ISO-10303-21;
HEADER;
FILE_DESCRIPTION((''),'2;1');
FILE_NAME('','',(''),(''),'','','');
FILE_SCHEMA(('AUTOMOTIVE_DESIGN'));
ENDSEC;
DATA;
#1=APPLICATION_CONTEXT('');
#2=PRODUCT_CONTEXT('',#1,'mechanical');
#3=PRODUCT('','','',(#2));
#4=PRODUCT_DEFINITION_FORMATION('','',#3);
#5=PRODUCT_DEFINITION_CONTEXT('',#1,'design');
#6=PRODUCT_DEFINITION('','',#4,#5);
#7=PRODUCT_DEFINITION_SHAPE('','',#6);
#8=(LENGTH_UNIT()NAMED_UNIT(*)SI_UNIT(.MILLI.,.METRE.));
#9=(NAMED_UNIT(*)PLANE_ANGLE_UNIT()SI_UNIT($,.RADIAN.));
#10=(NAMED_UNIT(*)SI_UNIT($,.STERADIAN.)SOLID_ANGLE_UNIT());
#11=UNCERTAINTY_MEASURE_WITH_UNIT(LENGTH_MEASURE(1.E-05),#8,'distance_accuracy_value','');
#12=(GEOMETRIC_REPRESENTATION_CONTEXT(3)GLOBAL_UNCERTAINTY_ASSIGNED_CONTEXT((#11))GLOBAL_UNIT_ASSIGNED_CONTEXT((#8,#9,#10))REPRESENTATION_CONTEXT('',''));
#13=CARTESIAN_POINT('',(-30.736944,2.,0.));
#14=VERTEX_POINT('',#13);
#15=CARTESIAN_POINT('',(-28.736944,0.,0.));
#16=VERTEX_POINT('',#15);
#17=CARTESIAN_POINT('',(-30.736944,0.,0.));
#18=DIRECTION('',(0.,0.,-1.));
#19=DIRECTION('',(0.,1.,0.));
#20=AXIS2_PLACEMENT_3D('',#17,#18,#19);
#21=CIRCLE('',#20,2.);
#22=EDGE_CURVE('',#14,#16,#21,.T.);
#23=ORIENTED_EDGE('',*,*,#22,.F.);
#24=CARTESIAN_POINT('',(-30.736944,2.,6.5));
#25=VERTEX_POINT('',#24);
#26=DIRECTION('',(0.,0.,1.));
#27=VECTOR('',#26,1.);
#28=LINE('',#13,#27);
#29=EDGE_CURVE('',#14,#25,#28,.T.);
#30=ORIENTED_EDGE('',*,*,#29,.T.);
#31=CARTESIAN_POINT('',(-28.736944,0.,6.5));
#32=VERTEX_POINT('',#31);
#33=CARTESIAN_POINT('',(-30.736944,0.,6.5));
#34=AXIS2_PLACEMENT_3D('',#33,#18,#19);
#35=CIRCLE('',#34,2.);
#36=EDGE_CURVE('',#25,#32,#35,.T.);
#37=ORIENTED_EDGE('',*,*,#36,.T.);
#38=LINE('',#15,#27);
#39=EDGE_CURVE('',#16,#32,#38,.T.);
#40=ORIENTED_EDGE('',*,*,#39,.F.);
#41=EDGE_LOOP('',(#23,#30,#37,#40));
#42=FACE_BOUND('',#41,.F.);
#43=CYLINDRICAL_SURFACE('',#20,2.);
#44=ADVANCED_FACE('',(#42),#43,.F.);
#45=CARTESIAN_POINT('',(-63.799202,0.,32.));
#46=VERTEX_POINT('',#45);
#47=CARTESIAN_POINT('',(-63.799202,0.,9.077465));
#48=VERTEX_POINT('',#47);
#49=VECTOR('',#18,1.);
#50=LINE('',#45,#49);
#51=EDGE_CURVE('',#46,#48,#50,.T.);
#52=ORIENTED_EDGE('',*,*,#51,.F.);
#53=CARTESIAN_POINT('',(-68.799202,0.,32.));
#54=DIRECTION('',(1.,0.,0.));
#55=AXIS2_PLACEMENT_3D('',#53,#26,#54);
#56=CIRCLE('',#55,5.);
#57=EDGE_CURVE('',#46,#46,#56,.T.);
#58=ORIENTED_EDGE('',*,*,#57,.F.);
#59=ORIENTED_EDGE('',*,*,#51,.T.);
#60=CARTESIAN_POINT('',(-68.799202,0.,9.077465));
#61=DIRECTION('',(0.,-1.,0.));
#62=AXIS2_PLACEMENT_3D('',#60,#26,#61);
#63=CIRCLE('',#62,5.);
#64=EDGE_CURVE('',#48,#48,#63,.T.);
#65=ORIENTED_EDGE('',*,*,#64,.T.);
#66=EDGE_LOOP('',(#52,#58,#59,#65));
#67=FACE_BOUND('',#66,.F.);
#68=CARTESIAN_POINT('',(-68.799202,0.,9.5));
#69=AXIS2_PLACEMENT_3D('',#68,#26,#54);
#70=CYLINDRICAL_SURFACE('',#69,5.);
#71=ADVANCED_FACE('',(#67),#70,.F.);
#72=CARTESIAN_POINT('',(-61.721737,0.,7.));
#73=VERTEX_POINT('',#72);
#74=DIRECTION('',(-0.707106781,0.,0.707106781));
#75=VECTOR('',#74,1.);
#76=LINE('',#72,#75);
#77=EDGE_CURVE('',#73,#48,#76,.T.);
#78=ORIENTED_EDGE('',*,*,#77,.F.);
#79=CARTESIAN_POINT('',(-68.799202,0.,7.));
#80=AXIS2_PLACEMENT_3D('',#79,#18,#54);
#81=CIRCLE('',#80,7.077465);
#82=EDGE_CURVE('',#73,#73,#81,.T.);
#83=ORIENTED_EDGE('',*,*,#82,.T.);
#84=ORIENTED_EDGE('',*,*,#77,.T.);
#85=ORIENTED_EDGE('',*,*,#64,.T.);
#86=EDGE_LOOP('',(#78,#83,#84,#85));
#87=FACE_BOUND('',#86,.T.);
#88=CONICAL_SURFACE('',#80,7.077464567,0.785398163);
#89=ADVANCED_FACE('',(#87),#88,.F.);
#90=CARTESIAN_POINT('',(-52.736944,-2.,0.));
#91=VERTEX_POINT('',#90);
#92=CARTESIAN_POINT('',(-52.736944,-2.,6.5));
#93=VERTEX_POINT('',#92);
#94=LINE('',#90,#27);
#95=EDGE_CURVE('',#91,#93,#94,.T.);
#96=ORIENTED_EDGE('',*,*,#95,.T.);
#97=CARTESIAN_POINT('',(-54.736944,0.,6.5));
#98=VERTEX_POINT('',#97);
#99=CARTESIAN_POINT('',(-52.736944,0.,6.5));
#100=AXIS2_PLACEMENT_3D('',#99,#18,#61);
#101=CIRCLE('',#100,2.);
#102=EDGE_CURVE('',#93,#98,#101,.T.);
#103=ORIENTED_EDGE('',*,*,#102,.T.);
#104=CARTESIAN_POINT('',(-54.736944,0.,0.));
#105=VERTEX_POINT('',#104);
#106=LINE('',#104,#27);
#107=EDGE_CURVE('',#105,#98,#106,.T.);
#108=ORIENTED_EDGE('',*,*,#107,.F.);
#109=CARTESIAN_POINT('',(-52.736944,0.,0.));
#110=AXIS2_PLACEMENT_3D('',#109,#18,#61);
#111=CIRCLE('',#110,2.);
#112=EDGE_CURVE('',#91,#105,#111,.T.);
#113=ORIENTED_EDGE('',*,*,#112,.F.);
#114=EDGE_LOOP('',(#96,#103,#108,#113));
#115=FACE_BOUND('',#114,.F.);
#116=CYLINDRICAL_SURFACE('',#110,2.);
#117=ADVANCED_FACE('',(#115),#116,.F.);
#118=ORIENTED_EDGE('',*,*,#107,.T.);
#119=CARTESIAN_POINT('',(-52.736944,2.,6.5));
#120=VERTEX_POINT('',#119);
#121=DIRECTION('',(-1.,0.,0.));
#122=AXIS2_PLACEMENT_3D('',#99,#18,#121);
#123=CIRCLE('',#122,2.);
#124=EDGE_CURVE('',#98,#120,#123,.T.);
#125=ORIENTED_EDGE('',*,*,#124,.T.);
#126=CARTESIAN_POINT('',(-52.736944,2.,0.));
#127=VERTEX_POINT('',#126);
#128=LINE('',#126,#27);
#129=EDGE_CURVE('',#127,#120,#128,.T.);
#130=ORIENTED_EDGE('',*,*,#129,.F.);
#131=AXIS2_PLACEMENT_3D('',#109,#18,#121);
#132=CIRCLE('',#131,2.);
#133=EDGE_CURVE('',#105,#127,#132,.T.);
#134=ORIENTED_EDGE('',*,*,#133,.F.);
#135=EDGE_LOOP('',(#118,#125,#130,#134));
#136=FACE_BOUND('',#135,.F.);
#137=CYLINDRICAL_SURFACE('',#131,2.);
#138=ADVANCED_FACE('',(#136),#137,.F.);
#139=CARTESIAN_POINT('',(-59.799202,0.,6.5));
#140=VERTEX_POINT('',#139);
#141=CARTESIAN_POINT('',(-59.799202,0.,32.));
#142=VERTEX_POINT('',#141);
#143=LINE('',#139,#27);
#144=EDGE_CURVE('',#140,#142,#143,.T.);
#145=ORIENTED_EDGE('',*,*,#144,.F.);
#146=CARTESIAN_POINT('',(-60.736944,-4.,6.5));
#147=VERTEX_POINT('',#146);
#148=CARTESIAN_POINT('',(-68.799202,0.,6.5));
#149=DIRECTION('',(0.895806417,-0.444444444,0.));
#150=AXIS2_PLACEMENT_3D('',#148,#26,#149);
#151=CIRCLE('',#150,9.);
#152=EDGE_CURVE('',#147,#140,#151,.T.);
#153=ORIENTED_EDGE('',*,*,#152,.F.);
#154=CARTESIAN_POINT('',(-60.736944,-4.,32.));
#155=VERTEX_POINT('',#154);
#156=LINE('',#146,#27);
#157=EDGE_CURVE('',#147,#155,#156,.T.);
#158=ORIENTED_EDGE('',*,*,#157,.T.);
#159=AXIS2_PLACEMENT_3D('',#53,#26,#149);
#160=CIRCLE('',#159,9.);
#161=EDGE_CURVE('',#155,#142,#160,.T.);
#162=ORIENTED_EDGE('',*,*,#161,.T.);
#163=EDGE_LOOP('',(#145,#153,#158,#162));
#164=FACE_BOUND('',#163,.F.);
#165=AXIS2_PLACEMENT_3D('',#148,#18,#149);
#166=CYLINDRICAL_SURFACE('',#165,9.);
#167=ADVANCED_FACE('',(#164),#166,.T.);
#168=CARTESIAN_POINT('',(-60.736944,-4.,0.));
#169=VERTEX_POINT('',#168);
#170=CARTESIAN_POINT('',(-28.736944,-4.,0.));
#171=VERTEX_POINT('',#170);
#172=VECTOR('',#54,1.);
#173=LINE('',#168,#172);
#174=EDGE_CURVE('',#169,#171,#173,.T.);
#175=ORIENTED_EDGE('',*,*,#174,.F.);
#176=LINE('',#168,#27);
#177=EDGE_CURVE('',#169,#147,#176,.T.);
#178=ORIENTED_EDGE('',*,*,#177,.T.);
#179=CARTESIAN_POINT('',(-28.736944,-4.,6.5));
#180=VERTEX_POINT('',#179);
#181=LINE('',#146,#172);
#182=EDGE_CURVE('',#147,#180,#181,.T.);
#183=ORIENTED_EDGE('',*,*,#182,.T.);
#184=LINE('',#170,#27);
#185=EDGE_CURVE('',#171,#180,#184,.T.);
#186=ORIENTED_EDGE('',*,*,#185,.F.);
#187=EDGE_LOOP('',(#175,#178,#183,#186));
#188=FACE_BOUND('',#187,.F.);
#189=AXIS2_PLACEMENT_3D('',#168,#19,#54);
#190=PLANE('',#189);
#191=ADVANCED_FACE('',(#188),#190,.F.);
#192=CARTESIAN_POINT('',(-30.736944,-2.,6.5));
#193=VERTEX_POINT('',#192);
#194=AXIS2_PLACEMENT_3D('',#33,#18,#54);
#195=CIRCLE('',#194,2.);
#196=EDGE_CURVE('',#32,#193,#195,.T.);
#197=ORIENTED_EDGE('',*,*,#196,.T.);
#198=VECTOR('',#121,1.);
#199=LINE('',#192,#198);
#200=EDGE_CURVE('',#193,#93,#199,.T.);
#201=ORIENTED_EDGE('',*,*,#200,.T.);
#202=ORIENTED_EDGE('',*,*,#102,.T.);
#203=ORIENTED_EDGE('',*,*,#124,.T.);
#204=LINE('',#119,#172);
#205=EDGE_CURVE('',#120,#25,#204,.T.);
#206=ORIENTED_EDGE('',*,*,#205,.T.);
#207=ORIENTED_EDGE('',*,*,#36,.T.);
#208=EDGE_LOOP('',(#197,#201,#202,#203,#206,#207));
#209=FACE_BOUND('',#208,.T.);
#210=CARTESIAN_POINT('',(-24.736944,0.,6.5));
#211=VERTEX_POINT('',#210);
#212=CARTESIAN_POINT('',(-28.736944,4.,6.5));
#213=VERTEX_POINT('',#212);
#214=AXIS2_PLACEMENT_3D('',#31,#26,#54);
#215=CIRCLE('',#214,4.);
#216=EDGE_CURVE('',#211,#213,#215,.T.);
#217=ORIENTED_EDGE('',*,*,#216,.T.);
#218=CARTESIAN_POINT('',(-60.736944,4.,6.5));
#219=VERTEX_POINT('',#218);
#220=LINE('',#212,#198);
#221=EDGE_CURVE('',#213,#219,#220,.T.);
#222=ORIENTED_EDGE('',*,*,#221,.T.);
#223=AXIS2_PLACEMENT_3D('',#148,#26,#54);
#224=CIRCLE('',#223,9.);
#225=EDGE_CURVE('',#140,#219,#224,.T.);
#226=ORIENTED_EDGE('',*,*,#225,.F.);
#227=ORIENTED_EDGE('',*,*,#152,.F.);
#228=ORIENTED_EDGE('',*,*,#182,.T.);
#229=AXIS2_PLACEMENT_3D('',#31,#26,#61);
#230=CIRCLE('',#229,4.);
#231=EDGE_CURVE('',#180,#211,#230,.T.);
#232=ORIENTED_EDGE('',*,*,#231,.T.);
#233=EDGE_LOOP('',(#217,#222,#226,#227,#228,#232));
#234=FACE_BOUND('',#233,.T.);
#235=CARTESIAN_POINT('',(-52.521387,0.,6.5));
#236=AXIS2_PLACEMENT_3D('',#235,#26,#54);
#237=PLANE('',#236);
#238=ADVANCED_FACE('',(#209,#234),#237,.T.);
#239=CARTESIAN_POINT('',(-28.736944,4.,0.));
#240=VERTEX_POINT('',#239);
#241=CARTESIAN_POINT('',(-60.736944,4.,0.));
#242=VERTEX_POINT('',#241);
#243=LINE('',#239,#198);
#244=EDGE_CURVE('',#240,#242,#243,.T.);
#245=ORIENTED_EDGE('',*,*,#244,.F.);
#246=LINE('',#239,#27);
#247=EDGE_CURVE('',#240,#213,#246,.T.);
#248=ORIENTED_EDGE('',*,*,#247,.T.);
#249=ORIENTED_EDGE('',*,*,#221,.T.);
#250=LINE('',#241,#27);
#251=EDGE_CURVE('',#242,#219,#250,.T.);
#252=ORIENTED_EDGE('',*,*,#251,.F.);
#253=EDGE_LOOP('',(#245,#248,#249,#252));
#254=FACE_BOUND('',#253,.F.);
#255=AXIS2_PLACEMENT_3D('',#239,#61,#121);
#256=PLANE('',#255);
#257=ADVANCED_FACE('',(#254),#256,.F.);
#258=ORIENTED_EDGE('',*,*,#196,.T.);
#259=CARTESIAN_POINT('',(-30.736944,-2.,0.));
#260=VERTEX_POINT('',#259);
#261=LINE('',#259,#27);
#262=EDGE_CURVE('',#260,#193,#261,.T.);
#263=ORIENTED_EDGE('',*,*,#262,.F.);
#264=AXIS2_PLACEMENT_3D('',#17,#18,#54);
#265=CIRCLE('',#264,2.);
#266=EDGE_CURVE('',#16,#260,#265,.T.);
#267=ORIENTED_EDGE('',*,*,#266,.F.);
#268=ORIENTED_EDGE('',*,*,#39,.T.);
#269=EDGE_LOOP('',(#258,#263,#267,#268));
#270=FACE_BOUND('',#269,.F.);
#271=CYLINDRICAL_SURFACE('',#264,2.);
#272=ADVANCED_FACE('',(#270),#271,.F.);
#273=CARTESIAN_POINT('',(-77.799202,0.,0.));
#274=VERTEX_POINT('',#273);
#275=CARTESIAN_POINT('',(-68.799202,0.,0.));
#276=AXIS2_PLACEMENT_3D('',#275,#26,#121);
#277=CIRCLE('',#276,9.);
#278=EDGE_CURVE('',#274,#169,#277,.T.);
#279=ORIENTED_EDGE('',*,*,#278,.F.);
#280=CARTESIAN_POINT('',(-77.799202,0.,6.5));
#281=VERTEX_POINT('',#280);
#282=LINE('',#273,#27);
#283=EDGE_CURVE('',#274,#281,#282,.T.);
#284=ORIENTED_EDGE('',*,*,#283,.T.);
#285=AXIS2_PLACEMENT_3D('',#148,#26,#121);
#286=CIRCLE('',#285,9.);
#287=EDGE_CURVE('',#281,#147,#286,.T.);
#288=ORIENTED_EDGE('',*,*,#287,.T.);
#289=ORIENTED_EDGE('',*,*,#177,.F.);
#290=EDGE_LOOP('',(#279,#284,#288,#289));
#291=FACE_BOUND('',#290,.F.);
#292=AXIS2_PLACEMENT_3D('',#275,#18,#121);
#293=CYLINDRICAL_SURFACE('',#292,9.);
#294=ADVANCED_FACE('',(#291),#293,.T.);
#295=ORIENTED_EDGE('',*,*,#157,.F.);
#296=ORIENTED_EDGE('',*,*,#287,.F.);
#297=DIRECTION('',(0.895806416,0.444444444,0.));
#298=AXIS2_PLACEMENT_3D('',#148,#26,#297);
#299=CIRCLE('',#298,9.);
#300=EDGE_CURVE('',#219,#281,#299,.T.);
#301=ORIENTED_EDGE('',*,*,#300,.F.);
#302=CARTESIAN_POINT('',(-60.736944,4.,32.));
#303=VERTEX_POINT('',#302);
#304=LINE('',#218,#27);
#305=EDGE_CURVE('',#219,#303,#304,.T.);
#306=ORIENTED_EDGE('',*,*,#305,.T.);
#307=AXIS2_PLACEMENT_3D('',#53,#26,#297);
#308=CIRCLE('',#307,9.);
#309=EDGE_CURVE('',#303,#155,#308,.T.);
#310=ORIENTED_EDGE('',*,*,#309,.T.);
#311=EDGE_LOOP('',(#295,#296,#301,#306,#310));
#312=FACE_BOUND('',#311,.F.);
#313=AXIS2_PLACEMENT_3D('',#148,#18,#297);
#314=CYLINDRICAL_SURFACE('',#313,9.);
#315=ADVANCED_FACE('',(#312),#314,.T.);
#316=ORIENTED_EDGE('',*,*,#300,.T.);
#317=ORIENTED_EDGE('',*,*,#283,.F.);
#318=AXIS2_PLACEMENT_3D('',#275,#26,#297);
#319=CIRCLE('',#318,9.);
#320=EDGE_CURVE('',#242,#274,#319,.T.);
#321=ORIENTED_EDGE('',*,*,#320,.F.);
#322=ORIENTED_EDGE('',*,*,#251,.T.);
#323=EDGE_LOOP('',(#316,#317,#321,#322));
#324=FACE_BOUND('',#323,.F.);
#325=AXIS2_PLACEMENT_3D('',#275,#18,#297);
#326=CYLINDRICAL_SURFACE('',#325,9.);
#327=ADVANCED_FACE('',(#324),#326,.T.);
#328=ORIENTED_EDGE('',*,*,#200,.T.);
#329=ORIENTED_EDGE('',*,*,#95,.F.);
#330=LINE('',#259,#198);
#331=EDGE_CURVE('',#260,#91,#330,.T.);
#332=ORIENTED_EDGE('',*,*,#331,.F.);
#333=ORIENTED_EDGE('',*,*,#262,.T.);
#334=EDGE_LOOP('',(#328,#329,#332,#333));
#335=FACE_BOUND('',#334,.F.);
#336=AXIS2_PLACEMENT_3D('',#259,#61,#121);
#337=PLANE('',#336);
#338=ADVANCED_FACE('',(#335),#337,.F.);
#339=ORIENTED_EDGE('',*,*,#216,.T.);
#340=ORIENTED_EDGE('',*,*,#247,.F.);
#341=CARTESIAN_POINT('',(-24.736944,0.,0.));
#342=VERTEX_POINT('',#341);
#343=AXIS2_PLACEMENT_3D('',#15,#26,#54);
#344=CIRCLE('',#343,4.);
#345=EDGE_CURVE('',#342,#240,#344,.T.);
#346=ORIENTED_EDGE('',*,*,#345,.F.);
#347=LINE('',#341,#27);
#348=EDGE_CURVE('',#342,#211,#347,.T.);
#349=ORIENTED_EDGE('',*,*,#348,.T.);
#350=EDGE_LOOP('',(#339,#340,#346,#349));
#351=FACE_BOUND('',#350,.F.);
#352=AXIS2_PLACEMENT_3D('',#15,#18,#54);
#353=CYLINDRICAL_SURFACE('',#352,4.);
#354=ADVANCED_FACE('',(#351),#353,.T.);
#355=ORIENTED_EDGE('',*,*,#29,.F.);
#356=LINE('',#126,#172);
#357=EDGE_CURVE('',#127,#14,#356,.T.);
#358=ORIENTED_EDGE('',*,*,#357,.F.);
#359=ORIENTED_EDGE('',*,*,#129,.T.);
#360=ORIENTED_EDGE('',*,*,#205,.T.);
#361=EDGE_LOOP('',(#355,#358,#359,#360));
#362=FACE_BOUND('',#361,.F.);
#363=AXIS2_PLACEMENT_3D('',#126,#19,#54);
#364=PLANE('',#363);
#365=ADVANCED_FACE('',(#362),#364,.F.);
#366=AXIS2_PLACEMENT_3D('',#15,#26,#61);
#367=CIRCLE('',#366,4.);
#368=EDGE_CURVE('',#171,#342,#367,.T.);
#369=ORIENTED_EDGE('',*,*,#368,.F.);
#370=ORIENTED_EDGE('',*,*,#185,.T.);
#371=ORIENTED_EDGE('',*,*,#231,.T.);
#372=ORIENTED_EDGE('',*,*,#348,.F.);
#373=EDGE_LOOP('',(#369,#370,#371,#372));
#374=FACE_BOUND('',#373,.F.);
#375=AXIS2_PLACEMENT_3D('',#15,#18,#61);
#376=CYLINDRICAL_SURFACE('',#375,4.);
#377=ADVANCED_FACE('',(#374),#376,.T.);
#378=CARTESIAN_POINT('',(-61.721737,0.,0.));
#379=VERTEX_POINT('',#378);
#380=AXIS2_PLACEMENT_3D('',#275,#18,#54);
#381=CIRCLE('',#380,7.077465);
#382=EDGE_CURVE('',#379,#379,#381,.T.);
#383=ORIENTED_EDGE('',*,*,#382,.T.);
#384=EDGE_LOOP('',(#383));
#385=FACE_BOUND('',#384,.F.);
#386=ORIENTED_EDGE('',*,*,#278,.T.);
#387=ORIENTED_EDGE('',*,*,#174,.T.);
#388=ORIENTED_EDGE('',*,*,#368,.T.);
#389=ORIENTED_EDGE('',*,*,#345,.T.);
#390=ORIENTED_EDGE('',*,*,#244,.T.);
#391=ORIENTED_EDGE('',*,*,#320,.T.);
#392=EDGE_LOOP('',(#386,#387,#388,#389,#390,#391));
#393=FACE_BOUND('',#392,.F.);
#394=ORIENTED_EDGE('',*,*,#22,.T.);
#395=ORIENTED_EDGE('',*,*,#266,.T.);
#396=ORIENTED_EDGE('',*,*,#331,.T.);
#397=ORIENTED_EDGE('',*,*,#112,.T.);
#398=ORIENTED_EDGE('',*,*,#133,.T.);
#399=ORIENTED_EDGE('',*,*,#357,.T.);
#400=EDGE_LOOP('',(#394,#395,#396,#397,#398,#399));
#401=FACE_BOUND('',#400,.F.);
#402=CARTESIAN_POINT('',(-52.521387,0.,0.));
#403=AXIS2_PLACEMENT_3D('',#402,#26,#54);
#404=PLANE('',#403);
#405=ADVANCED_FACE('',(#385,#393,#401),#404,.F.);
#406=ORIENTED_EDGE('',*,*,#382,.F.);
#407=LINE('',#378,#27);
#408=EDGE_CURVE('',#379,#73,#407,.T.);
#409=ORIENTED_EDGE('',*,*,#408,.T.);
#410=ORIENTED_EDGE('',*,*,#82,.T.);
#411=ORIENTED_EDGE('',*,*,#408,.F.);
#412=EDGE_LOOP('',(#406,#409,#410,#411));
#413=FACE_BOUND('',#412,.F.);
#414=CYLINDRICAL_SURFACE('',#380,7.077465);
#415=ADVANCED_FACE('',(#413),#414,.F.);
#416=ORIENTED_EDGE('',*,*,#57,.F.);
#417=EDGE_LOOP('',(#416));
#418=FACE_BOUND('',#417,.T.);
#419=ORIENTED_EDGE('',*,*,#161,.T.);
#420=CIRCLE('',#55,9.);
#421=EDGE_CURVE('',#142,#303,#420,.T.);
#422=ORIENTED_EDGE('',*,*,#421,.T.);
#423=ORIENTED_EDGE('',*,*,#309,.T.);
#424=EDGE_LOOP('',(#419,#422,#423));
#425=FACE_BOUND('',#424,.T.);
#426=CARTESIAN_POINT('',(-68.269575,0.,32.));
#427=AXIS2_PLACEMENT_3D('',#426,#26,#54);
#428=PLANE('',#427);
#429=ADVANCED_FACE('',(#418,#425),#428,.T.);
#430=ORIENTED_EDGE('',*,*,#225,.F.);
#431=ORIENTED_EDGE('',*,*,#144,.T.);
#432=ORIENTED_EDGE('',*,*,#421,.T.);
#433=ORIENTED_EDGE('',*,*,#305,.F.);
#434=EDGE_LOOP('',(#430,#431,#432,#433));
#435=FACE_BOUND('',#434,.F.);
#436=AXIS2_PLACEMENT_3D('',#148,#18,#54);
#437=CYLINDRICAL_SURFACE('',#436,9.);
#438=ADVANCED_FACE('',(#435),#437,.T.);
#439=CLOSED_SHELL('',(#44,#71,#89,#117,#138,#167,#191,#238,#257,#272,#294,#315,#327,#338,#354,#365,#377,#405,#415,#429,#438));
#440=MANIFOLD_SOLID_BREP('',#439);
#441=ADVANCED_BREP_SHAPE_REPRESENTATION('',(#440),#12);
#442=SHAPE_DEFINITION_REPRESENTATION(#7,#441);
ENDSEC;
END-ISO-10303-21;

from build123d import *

# Parameters (mm, degrees)
F1_DEPTH    = 6.5
F3_DEPTH    = 25.5
F4_R        = 5
F5_DEPTH    = 32
F6_R        = 7.0774645673
F6_R_2      = 5
F7_DEPTH    = 12
F8_S5_R     = 5
F8_T6_DEPTH = 12


# Not quite as in the source:
# - a fillet or chamfer that OpenCascade refuses, or shapes differently, is made with other operations: its cross-section is extruded or revolved along the edge and cut away or added


with BuildPart() as f1:
    # F0 (on Top) → F1 (new body)
    with BuildSketch(Plane.XY):
        with BuildLine():
            Line((-28.7369439649, 4), (-60.7369439649, 4))
            ThreePointArc((-60.7369439649, 4), (-70.8534266602, 8.7624288794), (-77.7992017132, 0))
            ThreePointArc((-77.7992017132, 0), (-70.8534266602, -8.7624288794), (-60.7369439649, -4))
            Line((-60.7369439649, -4), (-28.7369439649, -4))
            ThreePointArc((-28.7369439649, -4), (-25.9085168402, -2.8284271247), (-24.7369439649, 0))
            ThreePointArc((-24.7369439649, 0), (-25.9085168402, 2.8284271247), (-28.7369439649, 4))
        make_face()
        with BuildLine():
            ThreePointArc((-54.7369439649, 0), (-54.1511575273, 1.4142135624), (-52.7369439649, 2))
            Line((-52.7369439649, 2), (-30.7369439649, 2))
            ThreePointArc((-30.7369439649, 2), (-29.3227304026, 1.4142135624), (-28.7369439649, 0))
            ThreePointArc((-28.7369439649, 0), (-29.3227304026, -1.4142135624), (-30.7369439649, -2))
            Line((-30.7369439649, -2), (-52.7369439649, -2))
            ThreePointArc((-52.7369439649, -2), (-54.1511575273, -1.4142135624), (-54.7369439649, 0))
        make_face(mode=Mode.SUBTRACT)
    extrude(amount=F1_DEPTH)

    # F2 (on face) → F3 (join)
    with BuildSketch(Plane.XY.offset(6.5)):
        with BuildLine():
            ThreePointArc((-60.7369439649, -4), (-60.0367728338, -2.0542249469), (-59.7992017132, 0))
            ThreePointArc((-59.7992017132, 0), (-60.0367728338, 2.0542249469), (-60.7369439649, 4))
            ThreePointArc((-60.7369439649, 4), (-77.7992017132, 0), (-60.7369439649, -4))
        make_face()
    extrude(amount=F3_DEPTH)

    # F4 (on face) → F5 (cut, through all)
    with BuildSketch(Plane.XY.offset(32)):
        with Locations((-68.7992017132, 0)):
            Circle(F4_R)
    extrude(amount=-F5_DEPTH, mode=Mode.SUBTRACT)

    # F6 (on face) → F7 (cut)
    with BuildSketch(Plane(origin=(0, 0, 0), x_dir=(1, 0, 0), z_dir=(0, 0, -1))):
        with Locations((-68.7992017132, 0)):
            Circle(F6_R)
        with Locations((-68.7992017132, 0)):
            Circle(F6_R_2, mode=Mode.SUBTRACT)
    extrude(amount=-F7_DEPTH, mode=Mode.SUBTRACT)

    # F8: chamfer of 5 on 1 edges, made by hand


with BuildPart() as f8_tool2:
    # F8_s3 → F8_t4 (revolve)
    with BuildSketch(Plane.XZ):
        Polygon((-61.721737146, 7), (-66.721737146, 12), (-61.721737146, 12), align=None)
    revolve(axis=Axis((-68.7992017132, 0, 12), (0, 0, -1)))

    # F8_s5 → F8_t6 (cut, symmetric)
    with BuildSketch(Plane.XY.offset(9.5)):
        with Locations((-68.7992017132, 0)):
            Circle(F8_S5_R)
    extrude(amount=F8_T6_DEPTH, both=True, mode=Mode.SUBTRACT)


with BuildPart() as f1_1:
    add(f1.part)

    # F8_t1: union F8_tool2
    add(f8_tool2.part)


solid = f1_1.part
